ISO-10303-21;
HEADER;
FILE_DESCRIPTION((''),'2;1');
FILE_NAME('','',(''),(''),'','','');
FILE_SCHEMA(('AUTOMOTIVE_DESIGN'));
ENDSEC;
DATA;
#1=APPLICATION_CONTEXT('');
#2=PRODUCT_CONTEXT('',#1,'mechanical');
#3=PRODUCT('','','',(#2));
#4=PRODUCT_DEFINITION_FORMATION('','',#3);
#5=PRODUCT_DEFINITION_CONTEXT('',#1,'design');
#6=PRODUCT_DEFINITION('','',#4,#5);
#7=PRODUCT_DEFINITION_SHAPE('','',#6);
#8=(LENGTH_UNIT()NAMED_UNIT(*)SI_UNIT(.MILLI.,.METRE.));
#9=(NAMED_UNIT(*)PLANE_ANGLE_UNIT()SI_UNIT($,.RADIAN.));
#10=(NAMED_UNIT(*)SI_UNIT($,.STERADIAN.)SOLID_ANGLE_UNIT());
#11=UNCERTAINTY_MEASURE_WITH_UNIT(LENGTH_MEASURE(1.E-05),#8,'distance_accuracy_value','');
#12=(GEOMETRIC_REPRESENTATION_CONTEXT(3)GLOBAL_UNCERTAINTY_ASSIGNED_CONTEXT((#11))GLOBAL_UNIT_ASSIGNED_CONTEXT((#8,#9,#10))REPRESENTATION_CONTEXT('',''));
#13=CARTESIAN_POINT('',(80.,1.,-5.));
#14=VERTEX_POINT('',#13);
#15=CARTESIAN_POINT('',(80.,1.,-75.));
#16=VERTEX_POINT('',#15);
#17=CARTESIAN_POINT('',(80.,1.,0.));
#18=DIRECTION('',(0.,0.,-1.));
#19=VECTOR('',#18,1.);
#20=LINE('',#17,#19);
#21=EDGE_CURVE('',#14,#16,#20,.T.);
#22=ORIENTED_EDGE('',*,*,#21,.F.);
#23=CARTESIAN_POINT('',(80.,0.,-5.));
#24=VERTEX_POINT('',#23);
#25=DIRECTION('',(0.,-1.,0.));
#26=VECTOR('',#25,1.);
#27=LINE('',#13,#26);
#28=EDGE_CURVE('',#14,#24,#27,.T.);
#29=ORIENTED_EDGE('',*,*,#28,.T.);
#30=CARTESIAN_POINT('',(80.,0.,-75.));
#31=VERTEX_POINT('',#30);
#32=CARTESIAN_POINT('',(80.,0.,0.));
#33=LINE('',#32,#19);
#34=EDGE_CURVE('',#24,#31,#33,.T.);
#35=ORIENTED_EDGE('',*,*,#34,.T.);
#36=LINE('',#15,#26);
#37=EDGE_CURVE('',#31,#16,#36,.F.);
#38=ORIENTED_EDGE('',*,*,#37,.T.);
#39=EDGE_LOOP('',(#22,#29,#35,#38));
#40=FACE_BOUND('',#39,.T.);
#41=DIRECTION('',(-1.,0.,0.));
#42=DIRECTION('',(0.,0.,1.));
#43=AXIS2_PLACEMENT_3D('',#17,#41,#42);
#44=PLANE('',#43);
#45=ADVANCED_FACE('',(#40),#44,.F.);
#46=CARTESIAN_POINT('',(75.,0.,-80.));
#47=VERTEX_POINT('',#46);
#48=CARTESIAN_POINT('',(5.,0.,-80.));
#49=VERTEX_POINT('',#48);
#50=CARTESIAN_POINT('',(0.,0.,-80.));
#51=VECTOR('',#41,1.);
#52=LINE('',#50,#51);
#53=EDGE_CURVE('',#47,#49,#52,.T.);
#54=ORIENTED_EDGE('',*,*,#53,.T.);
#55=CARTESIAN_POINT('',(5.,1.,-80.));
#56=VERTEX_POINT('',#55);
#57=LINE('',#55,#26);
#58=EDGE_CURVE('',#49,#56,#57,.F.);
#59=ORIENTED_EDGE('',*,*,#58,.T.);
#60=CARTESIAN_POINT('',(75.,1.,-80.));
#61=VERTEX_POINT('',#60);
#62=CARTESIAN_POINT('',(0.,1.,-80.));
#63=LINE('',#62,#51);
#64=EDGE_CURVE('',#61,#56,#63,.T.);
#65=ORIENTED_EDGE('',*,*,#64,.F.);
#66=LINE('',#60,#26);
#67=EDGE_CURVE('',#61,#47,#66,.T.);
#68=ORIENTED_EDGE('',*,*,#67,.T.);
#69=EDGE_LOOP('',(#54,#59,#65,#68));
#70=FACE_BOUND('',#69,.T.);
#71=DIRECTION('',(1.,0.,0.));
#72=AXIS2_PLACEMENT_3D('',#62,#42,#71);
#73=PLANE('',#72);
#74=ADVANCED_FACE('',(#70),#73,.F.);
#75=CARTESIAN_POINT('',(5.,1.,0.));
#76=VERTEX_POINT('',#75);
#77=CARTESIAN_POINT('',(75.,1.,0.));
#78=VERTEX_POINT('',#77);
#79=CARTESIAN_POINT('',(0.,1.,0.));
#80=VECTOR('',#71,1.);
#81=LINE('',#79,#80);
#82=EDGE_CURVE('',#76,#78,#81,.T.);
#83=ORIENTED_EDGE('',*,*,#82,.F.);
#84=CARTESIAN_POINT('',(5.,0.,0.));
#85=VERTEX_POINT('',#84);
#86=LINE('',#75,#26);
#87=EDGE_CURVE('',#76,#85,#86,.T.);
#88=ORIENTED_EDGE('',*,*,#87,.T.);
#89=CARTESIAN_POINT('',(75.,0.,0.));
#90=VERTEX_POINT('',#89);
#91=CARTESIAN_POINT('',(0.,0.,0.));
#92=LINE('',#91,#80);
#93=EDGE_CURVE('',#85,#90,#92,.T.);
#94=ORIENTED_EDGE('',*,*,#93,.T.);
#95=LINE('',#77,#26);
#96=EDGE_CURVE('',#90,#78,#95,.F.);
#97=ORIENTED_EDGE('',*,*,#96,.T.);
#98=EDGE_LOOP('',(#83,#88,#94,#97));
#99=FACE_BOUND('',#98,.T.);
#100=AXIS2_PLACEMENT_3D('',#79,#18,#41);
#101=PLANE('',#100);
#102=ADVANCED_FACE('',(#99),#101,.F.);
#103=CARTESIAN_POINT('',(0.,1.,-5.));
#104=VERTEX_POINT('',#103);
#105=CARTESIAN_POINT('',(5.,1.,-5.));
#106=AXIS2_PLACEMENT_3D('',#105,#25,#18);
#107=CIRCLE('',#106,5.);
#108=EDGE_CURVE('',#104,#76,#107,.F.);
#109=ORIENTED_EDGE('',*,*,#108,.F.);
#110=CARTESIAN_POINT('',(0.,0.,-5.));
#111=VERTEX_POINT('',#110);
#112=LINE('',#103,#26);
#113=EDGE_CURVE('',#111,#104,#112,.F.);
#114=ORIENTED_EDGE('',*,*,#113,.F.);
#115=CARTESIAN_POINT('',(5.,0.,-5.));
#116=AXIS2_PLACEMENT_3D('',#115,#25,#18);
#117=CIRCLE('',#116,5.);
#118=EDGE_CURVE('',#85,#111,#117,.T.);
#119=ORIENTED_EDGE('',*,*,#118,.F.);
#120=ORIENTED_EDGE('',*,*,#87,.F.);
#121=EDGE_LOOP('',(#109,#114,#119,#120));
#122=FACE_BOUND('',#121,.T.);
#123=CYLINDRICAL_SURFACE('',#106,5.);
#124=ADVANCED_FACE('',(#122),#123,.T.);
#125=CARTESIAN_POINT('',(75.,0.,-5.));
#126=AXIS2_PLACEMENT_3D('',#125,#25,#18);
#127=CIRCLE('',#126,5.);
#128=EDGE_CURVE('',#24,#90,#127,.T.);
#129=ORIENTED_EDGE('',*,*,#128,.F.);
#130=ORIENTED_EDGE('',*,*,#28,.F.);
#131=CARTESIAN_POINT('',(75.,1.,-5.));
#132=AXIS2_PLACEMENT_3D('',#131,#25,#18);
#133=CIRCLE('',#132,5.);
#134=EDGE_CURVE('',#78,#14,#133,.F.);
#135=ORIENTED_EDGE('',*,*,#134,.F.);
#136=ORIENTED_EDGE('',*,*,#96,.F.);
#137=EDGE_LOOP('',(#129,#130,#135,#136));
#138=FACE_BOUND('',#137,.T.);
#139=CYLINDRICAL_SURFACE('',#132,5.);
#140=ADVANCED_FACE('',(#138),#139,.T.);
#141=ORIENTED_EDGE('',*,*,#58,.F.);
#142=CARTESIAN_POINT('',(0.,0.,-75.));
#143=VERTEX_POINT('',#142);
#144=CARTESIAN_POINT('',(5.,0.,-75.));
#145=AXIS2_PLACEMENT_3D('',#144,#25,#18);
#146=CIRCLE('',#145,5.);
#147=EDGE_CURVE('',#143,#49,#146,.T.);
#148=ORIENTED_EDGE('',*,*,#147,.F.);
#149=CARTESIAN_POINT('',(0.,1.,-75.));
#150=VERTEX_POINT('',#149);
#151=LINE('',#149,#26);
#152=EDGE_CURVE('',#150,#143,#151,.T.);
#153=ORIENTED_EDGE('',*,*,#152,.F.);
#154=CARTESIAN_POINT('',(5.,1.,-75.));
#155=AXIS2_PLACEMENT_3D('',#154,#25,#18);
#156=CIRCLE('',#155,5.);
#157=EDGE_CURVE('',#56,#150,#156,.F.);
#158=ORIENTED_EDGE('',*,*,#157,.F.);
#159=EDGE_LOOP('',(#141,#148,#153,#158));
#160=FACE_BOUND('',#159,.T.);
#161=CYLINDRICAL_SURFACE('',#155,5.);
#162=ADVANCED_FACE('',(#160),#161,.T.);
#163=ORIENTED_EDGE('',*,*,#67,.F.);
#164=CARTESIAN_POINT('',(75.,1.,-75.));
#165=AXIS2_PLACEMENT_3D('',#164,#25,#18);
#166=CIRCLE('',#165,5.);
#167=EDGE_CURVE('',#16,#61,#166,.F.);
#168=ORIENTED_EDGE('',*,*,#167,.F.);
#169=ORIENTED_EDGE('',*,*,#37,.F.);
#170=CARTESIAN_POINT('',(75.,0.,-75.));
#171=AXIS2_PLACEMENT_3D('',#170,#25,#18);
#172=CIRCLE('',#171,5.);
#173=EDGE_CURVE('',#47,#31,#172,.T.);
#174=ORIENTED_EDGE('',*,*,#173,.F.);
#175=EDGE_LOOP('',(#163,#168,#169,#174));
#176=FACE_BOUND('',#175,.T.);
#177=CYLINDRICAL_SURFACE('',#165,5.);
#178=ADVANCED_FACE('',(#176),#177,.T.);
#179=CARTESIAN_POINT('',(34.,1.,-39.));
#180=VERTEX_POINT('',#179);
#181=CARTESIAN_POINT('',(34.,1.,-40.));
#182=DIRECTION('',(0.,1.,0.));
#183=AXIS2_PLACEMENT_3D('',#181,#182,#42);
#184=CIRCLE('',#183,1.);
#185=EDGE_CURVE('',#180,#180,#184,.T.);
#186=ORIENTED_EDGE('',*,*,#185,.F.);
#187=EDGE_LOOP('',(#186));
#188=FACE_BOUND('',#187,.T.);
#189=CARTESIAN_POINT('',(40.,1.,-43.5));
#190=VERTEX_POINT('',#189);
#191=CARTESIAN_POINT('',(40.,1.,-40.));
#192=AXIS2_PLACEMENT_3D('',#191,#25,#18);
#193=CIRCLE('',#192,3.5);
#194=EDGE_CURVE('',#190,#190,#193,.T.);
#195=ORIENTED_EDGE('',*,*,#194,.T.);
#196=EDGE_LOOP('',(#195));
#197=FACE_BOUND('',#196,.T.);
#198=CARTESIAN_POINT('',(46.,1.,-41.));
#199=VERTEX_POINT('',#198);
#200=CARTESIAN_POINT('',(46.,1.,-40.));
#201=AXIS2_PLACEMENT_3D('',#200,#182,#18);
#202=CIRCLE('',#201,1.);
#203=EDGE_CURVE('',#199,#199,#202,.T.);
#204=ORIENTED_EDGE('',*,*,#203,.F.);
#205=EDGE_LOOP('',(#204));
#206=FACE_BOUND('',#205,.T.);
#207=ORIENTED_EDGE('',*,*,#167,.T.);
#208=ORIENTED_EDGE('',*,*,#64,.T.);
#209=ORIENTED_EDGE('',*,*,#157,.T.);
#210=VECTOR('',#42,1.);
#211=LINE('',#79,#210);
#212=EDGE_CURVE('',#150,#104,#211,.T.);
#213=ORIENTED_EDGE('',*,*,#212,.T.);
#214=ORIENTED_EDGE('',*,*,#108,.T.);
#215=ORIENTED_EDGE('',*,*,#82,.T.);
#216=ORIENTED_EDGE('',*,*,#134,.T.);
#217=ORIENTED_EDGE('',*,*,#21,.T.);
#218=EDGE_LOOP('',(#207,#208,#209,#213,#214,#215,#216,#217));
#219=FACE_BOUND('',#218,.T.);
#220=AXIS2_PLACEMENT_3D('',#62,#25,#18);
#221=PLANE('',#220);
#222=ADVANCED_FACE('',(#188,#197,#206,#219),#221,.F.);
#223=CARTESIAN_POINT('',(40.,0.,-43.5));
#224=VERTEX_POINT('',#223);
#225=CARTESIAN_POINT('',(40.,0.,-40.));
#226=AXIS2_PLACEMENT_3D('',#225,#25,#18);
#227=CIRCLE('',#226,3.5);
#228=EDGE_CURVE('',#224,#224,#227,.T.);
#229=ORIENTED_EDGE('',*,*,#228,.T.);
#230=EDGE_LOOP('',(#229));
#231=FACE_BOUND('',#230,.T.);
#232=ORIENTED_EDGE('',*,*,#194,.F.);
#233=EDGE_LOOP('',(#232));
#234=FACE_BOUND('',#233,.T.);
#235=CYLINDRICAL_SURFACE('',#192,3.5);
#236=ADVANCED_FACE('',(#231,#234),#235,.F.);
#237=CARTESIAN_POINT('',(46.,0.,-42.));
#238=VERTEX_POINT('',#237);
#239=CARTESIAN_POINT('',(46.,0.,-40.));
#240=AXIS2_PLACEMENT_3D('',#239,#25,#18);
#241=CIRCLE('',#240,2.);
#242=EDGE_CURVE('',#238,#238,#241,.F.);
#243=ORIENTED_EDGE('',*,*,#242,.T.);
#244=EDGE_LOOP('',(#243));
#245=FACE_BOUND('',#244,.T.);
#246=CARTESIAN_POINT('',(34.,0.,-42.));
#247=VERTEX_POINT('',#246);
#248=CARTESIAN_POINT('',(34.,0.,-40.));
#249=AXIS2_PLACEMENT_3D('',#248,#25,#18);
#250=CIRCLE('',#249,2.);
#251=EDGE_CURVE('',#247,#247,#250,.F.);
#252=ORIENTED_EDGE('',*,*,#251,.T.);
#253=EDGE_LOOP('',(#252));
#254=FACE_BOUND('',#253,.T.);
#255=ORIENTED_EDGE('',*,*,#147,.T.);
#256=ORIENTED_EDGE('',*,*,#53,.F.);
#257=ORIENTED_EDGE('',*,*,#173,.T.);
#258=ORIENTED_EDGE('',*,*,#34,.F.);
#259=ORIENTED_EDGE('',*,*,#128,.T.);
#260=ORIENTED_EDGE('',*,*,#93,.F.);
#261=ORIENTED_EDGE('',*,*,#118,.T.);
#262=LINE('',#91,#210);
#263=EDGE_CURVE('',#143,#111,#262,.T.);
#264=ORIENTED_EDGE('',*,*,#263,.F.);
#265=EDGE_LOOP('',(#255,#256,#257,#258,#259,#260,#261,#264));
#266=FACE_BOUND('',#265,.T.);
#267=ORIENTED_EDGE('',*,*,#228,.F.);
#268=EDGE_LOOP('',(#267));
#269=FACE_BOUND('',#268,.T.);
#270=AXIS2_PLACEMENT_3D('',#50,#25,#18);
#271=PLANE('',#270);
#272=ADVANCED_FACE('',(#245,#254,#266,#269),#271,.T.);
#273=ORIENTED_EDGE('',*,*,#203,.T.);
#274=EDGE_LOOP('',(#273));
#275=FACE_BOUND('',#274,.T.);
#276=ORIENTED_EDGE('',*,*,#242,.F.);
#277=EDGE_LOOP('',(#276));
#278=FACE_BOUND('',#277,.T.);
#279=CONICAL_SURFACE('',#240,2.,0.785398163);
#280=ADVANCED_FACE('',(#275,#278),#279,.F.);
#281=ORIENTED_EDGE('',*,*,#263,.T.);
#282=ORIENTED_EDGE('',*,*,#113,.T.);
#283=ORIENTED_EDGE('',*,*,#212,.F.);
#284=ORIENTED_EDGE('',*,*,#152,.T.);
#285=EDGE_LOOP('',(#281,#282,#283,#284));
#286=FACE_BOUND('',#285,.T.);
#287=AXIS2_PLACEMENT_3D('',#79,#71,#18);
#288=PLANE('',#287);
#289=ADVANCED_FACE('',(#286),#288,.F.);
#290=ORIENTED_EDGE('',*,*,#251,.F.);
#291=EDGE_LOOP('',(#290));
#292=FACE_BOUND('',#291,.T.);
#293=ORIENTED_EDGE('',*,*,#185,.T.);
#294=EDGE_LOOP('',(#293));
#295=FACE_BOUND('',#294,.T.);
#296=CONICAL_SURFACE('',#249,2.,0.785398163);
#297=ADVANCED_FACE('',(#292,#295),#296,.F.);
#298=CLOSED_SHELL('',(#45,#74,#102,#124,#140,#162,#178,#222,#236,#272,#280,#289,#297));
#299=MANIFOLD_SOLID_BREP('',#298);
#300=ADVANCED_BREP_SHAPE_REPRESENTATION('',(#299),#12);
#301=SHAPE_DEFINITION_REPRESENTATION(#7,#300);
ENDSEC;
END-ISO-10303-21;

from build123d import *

# Parameters (mm, degrees)
ESQUISSE1_W                  = 80
ESQUISSE1_H                  = 80
EXTRUSION1_DEPTH             = 1
CONG_1_R                     = 5
ESQUISSE2_R                  = 3.5
ENL_V_MAT_EXTRU_1_DEPTH      = 114.141504321
ESQUISSE3_R                  = 1
ENL_V_MAT_EXTRU_2_DEPTH      = 114.141504321
R_P_TITION_CIRCULAIRE1_COUNT = 2
CHANFREIN1_SIZE              = 1


with BuildPart() as part:
    # Esquisse1 → Extrusion1 (new body)
    with BuildSketch(Plane(origin=(0, 0, 0), x_dir=(1, 0, 0), z_dir=(0, 1, 0))):
        with Locations((40, 40)):
            Rectangle(ESQUISSE1_W, ESQUISSE1_H)
    extrude(amount=EXTRUSION1_DEPTH)

    # Congé1
    cong_1_edges = [part.edges().sort_by_distance(p)[0] for p in [
        (0, 0.5, -80),
        (80, 0.5, -80),
        (80, 0.5, 0),
        (0, 0.5, 0),
    ]]
    fillet(cong_1_edges, radius=CONG_1_R)

    # Esquisse2 → Enlèv. mat.-Extru.1 (cut, through all)
    with BuildSketch(Plane.XZ):
        with Locations(Location((40, -40, 0), (0, 0, 270))):
            Circle(ESQUISSE2_R)
    extrude(amount=-ENL_V_MAT_EXTRU_1_DEPTH, mode=Mode.SUBTRACT)

    # Esquisse3 → Enlèv. mat.-Extru.2 (cut, through all)
    with BuildSketch(Plane(origin=(0, 1, 0), x_dir=(1, 0, 0), z_dir=(0, 1, 0))):
        with Locations(Location((34, 40, 0), (0, 0, 270))):
            Circle(ESQUISSE3_R)
    enl_v_mat_extru_2 = extrude(amount=-ENL_V_MAT_EXTRU_2_DEPTH, mode=Mode.SUBTRACT)

    # Répétition circulaire1: Enlèv. mat.-Extru.2 ×2 about axis
    r_p_tition_circulaire1_axis = Axis((40, 0, -40), (0, 1, 0))
    for i in range(1, R_P_TITION_CIRCULAIRE1_COUNT):
        add(enl_v_mat_extru_2.rotate(r_p_tition_circulaire1_axis, i * 360 / R_P_TITION_CIRCULAIRE1_COUNT), mode=Mode.SUBTRACT)

    # Chanfrein1
    chanfrein1_edges = [part.edges().sort_by_distance(p)[0] for p in [
        (34, 0, -41),
        (46, 0, -39),
    ]]
    chamfer(chanfrein1_edges, length=CHANFREIN1_SIZE - 0.0001)  # a hair under: the kernel refuses the full size


solid = part.part
